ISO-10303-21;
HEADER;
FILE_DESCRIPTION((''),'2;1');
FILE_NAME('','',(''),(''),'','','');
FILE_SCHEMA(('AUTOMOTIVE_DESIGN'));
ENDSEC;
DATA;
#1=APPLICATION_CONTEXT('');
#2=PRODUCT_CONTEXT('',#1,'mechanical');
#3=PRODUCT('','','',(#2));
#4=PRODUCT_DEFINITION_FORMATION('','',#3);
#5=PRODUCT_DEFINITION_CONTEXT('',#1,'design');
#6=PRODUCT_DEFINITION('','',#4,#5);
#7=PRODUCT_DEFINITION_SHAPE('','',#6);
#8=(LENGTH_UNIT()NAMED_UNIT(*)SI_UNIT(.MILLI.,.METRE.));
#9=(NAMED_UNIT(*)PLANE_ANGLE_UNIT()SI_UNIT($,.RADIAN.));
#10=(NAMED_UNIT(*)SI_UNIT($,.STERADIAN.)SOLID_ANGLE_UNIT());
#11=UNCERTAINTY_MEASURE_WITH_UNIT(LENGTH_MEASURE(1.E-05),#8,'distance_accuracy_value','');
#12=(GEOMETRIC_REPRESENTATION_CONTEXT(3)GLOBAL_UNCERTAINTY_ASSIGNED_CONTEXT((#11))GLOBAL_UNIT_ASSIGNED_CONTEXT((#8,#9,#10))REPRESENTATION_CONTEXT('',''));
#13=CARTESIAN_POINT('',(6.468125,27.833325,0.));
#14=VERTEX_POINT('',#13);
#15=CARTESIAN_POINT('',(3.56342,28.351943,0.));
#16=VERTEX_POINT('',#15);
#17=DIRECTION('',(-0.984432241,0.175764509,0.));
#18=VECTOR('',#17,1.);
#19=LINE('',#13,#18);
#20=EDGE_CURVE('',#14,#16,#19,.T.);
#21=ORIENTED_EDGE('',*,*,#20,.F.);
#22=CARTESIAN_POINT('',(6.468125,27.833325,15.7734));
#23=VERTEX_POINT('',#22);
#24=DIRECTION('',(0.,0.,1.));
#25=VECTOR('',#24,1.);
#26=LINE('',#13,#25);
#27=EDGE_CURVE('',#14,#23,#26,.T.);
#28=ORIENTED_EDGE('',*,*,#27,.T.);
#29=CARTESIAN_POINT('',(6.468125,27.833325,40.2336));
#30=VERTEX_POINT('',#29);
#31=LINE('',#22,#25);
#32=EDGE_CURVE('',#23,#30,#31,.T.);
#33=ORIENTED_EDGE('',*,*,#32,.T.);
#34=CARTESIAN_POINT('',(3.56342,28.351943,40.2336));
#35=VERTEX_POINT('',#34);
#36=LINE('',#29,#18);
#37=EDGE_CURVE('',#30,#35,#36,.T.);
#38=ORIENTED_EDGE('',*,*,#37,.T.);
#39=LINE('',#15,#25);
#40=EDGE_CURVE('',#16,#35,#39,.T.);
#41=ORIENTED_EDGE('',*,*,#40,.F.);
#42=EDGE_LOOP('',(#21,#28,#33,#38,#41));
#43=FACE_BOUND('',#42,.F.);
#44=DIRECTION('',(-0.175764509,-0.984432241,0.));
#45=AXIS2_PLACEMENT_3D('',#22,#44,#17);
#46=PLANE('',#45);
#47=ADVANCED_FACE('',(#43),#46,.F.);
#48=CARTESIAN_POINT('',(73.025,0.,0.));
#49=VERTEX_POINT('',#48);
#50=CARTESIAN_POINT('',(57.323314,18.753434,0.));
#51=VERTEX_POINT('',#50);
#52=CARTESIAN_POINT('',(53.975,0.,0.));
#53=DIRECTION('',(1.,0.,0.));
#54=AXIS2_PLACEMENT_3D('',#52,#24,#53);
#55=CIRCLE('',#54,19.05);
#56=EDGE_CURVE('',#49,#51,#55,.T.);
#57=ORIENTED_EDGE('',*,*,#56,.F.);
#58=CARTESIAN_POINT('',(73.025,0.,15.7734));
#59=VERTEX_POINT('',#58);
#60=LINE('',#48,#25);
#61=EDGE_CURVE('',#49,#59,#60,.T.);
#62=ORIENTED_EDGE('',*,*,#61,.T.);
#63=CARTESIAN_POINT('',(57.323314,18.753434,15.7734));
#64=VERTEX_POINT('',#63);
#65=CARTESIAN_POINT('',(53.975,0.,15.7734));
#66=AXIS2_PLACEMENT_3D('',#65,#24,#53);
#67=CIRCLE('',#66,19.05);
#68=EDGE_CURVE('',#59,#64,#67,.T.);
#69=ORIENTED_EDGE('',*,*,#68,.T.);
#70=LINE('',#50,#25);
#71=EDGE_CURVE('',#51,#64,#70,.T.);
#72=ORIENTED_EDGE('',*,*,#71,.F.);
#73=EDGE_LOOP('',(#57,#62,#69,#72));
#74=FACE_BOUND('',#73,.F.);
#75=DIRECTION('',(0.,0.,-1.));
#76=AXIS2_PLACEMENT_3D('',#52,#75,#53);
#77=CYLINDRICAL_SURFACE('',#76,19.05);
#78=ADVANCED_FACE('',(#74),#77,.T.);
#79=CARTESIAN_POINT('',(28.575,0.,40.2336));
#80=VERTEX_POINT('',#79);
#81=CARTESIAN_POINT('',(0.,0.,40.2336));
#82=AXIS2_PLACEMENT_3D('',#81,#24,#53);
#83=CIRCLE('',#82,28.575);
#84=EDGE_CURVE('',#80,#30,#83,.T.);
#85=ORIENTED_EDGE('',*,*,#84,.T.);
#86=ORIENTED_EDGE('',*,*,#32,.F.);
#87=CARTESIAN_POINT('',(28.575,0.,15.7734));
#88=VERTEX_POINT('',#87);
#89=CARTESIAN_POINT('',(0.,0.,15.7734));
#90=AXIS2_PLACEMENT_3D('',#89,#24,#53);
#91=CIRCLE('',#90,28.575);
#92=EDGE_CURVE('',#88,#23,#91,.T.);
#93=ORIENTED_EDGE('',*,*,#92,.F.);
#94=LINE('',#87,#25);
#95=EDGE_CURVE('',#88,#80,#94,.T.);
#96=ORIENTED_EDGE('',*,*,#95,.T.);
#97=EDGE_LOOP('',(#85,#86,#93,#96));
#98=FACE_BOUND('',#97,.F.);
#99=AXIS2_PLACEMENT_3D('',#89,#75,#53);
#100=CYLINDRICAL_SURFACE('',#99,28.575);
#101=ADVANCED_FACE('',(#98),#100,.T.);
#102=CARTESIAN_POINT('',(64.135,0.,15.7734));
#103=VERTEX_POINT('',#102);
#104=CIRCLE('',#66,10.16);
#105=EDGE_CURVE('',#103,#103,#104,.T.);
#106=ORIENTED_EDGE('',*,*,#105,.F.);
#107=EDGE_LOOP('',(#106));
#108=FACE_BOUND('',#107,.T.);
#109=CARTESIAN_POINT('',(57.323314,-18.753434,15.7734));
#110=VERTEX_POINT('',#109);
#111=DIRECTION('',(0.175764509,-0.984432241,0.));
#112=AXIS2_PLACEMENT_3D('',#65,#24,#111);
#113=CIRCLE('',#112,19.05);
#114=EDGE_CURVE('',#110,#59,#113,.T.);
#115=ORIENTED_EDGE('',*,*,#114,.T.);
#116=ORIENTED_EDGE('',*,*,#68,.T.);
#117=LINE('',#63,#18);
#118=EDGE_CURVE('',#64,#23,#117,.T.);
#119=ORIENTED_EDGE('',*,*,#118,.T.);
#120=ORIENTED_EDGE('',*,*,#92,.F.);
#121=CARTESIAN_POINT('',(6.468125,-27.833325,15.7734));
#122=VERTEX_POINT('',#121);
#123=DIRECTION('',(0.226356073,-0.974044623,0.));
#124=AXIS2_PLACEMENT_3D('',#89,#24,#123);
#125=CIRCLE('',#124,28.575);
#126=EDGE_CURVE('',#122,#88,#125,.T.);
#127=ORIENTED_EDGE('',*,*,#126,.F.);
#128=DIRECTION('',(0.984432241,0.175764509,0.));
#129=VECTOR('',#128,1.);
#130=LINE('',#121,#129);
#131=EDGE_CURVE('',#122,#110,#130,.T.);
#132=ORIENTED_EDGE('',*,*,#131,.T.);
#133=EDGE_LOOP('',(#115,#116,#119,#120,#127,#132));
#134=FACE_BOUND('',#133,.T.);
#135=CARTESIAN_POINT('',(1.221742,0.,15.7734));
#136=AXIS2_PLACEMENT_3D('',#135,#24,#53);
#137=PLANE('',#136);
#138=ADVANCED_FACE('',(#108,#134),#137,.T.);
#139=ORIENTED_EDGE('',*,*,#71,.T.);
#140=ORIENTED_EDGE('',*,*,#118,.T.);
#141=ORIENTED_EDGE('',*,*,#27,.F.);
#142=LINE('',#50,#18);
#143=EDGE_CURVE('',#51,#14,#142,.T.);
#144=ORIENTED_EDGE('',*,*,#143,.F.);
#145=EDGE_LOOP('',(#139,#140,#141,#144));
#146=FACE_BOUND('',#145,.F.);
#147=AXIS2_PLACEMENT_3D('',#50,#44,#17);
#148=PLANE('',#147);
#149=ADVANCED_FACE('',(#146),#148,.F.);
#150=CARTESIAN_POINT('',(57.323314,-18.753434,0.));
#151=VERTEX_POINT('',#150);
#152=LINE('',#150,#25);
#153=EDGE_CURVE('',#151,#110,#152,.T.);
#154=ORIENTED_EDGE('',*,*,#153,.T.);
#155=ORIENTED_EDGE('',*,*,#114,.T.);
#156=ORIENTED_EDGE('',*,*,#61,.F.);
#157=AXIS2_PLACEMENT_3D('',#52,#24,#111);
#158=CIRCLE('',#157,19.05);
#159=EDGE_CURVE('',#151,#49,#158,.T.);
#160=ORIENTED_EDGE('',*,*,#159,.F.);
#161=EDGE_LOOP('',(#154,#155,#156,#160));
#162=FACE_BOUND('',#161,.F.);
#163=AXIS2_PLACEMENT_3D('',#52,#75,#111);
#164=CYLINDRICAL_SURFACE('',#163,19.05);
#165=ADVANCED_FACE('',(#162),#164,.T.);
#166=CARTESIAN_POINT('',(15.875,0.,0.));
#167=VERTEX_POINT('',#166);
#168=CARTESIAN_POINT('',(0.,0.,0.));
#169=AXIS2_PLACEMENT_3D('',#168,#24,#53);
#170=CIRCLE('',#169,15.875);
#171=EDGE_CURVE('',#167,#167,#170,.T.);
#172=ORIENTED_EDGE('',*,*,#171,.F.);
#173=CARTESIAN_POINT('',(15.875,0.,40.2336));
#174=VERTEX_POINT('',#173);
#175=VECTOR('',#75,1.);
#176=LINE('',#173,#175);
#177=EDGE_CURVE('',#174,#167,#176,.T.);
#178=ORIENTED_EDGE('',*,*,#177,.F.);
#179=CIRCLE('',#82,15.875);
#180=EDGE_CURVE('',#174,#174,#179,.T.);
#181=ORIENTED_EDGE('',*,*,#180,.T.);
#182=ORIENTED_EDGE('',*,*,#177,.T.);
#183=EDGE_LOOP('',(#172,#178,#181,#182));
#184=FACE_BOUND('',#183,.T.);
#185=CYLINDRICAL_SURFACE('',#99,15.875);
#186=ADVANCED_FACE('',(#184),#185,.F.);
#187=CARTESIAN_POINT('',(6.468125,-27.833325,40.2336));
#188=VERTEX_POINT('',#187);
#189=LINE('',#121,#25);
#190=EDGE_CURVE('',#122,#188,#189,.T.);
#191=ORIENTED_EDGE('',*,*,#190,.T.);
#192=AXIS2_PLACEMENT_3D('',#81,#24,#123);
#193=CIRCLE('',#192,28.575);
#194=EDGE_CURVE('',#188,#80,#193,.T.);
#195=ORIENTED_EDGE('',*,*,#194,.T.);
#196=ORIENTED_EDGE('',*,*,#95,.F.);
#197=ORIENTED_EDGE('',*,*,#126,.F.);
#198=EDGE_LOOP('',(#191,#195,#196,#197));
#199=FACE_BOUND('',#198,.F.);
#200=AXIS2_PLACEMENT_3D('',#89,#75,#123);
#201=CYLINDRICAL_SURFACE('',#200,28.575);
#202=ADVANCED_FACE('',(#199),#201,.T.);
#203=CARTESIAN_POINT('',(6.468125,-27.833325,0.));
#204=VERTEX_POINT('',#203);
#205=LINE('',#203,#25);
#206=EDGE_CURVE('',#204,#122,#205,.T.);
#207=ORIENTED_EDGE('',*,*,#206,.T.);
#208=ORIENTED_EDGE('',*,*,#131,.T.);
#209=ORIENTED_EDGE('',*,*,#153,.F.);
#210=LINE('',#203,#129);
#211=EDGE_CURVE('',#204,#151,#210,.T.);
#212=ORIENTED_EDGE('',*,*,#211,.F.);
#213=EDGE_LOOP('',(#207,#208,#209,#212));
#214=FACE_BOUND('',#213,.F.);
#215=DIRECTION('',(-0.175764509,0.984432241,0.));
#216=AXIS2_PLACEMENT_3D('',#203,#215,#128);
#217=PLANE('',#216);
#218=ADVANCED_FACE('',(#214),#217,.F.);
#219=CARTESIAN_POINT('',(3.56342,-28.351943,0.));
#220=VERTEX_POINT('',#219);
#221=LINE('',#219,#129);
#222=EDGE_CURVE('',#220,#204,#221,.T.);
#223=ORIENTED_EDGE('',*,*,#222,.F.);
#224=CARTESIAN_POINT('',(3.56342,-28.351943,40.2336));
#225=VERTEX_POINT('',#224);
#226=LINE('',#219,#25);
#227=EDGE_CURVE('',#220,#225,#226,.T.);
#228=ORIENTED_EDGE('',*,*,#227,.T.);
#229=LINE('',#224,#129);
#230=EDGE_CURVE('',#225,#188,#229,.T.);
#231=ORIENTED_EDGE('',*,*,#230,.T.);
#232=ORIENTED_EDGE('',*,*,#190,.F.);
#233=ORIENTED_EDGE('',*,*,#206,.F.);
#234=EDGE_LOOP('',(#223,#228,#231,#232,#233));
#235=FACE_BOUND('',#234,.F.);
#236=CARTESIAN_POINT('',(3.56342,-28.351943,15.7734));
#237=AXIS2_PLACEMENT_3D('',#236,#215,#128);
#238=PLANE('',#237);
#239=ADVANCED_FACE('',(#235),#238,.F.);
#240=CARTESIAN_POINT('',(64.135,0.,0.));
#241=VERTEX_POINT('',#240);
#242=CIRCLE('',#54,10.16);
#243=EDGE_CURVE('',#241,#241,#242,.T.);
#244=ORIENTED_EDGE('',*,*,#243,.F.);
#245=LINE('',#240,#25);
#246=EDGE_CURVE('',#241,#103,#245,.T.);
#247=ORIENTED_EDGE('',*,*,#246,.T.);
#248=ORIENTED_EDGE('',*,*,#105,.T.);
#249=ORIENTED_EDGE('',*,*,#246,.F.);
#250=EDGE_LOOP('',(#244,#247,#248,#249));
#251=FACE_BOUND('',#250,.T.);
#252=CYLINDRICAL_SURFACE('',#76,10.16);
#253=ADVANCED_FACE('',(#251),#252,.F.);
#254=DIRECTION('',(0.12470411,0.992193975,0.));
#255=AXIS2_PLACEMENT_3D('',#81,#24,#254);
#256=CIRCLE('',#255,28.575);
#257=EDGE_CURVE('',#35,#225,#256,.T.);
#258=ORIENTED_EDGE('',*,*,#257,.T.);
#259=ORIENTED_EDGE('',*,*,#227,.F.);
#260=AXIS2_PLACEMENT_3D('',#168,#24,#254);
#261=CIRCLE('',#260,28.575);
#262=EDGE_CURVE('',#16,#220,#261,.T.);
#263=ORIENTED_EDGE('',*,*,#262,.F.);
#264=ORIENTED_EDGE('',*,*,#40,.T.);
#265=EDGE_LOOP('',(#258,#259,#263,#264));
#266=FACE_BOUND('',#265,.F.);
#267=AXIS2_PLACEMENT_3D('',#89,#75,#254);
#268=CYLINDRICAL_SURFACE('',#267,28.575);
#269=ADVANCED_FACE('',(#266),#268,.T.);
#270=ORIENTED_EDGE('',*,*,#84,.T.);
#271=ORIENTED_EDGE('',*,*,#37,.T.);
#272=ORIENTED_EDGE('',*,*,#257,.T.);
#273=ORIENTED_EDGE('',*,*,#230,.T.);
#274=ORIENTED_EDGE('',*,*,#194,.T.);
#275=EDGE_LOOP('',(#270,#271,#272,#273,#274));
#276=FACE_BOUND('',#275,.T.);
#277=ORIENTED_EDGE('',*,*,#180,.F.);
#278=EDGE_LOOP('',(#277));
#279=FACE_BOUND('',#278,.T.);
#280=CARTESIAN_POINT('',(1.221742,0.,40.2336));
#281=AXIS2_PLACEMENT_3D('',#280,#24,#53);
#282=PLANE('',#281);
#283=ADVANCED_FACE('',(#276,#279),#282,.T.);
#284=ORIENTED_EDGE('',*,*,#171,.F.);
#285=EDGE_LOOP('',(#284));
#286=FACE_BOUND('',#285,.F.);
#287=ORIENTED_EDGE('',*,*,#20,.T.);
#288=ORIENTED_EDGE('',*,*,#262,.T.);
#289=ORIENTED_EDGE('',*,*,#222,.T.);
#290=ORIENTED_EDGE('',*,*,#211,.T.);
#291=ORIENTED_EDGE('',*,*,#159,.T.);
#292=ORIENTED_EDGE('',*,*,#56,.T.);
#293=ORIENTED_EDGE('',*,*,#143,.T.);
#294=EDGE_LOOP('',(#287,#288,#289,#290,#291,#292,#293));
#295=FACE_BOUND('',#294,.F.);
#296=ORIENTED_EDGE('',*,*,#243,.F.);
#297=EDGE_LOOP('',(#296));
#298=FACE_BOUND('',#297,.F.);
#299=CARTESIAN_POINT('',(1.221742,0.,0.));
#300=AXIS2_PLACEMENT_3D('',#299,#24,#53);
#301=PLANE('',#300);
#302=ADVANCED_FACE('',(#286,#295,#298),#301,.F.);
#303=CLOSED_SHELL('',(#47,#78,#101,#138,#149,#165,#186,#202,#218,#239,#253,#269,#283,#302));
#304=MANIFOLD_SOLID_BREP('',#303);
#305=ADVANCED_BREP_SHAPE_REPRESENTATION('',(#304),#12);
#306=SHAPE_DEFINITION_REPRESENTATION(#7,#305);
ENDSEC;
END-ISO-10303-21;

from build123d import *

# Parameters (mm, degrees)
F0_R     = 15.875
F0_R_2   = 10.16
F1_DEPTH = 15.7734
F2_R     = 15.875
F3_DEPTH = 24.4602


with BuildPart() as f1:
    # F0 (on Top) → F1 (new body)
    with BuildSketch(Plane.XY):
        with BuildLine():
            Line((6.4681247744, 27.833325114), (3.5634199556, 28.3519428474))
            ThreePointArc((3.5634199556, 28.3519428474), (-28.575, 0), (3.5634199556, -28.3519428474))
            Line((3.5634199556, -28.3519428474), (6.4681247744, -27.833325114))
            ThreePointArc((6.4681247744, -27.833325114), (22.3758495976, -17.7722249532), (28.575, 0))
            ThreePointArc((28.575, 0), (22.3758495976, 17.7722249532), (6.4681247744, 27.833325114))
        make_face()
        Circle(F0_R, mode=Mode.SUBTRACT)
        with BuildLine():
            Line((57.3233139044, 18.7534341921), (6.4681247744, 27.833325114))
            ThreePointArc((6.4681247744, 27.833325114), (22.3758495976, 17.7722249532), (28.575, 0))
            ThreePointArc((28.575, 0), (22.3758495976, -17.7722249532), (6.4681247744, -27.833325114))
            Line((6.4681247744, -27.833325114), (57.3233139044, -18.7534341921))
            ThreePointArc((57.3233139044, -18.7534341921), (34.925, 0), (57.3233139044, 18.7534341921))
        make_face()
        with BuildLine():
            ThreePointArc((73.025, 0), (68.5812979546, 12.2294137251), (57.3233139044, 18.7534341921))
            ThreePointArc((57.3233139044, 18.7534341921), (34.925, 0), (57.3233139044, -18.7534341921))
            ThreePointArc((57.3233139044, -18.7534341921), (68.5812979546, -12.2294137251), (73.025, 0))
        make_face()
        with Locations((53.975, 0)):
            Circle(F0_R_2, mode=Mode.SUBTRACT)
    extrude(amount=F1_DEPTH)

    # F2 (on face) → F3 (join)
    with BuildSketch(Plane.XY.offset(15.7734)):
        with BuildLine():
            Line((6.4681247744, 27.833325114), (3.5634199556, 28.3519428474))
            ThreePointArc((3.5634199556, 28.3519428474), (-28.575, 0), (3.5634199556, -28.3519428474))
            Line((3.5634199556, -28.3519428474), (6.4681247744, -27.833325114))
            ThreePointArc((6.4681247744, -27.833325114), (22.3758495976, -17.7722249532), (28.575, 0))
            ThreePointArc((28.575, 0), (22.3758495976, 17.7722249532), (6.4681247744, 27.833325114))
        make_face()
        Circle(F2_R, mode=Mode.SUBTRACT)
    extrude(amount=F3_DEPTH)


solid = f1.part
